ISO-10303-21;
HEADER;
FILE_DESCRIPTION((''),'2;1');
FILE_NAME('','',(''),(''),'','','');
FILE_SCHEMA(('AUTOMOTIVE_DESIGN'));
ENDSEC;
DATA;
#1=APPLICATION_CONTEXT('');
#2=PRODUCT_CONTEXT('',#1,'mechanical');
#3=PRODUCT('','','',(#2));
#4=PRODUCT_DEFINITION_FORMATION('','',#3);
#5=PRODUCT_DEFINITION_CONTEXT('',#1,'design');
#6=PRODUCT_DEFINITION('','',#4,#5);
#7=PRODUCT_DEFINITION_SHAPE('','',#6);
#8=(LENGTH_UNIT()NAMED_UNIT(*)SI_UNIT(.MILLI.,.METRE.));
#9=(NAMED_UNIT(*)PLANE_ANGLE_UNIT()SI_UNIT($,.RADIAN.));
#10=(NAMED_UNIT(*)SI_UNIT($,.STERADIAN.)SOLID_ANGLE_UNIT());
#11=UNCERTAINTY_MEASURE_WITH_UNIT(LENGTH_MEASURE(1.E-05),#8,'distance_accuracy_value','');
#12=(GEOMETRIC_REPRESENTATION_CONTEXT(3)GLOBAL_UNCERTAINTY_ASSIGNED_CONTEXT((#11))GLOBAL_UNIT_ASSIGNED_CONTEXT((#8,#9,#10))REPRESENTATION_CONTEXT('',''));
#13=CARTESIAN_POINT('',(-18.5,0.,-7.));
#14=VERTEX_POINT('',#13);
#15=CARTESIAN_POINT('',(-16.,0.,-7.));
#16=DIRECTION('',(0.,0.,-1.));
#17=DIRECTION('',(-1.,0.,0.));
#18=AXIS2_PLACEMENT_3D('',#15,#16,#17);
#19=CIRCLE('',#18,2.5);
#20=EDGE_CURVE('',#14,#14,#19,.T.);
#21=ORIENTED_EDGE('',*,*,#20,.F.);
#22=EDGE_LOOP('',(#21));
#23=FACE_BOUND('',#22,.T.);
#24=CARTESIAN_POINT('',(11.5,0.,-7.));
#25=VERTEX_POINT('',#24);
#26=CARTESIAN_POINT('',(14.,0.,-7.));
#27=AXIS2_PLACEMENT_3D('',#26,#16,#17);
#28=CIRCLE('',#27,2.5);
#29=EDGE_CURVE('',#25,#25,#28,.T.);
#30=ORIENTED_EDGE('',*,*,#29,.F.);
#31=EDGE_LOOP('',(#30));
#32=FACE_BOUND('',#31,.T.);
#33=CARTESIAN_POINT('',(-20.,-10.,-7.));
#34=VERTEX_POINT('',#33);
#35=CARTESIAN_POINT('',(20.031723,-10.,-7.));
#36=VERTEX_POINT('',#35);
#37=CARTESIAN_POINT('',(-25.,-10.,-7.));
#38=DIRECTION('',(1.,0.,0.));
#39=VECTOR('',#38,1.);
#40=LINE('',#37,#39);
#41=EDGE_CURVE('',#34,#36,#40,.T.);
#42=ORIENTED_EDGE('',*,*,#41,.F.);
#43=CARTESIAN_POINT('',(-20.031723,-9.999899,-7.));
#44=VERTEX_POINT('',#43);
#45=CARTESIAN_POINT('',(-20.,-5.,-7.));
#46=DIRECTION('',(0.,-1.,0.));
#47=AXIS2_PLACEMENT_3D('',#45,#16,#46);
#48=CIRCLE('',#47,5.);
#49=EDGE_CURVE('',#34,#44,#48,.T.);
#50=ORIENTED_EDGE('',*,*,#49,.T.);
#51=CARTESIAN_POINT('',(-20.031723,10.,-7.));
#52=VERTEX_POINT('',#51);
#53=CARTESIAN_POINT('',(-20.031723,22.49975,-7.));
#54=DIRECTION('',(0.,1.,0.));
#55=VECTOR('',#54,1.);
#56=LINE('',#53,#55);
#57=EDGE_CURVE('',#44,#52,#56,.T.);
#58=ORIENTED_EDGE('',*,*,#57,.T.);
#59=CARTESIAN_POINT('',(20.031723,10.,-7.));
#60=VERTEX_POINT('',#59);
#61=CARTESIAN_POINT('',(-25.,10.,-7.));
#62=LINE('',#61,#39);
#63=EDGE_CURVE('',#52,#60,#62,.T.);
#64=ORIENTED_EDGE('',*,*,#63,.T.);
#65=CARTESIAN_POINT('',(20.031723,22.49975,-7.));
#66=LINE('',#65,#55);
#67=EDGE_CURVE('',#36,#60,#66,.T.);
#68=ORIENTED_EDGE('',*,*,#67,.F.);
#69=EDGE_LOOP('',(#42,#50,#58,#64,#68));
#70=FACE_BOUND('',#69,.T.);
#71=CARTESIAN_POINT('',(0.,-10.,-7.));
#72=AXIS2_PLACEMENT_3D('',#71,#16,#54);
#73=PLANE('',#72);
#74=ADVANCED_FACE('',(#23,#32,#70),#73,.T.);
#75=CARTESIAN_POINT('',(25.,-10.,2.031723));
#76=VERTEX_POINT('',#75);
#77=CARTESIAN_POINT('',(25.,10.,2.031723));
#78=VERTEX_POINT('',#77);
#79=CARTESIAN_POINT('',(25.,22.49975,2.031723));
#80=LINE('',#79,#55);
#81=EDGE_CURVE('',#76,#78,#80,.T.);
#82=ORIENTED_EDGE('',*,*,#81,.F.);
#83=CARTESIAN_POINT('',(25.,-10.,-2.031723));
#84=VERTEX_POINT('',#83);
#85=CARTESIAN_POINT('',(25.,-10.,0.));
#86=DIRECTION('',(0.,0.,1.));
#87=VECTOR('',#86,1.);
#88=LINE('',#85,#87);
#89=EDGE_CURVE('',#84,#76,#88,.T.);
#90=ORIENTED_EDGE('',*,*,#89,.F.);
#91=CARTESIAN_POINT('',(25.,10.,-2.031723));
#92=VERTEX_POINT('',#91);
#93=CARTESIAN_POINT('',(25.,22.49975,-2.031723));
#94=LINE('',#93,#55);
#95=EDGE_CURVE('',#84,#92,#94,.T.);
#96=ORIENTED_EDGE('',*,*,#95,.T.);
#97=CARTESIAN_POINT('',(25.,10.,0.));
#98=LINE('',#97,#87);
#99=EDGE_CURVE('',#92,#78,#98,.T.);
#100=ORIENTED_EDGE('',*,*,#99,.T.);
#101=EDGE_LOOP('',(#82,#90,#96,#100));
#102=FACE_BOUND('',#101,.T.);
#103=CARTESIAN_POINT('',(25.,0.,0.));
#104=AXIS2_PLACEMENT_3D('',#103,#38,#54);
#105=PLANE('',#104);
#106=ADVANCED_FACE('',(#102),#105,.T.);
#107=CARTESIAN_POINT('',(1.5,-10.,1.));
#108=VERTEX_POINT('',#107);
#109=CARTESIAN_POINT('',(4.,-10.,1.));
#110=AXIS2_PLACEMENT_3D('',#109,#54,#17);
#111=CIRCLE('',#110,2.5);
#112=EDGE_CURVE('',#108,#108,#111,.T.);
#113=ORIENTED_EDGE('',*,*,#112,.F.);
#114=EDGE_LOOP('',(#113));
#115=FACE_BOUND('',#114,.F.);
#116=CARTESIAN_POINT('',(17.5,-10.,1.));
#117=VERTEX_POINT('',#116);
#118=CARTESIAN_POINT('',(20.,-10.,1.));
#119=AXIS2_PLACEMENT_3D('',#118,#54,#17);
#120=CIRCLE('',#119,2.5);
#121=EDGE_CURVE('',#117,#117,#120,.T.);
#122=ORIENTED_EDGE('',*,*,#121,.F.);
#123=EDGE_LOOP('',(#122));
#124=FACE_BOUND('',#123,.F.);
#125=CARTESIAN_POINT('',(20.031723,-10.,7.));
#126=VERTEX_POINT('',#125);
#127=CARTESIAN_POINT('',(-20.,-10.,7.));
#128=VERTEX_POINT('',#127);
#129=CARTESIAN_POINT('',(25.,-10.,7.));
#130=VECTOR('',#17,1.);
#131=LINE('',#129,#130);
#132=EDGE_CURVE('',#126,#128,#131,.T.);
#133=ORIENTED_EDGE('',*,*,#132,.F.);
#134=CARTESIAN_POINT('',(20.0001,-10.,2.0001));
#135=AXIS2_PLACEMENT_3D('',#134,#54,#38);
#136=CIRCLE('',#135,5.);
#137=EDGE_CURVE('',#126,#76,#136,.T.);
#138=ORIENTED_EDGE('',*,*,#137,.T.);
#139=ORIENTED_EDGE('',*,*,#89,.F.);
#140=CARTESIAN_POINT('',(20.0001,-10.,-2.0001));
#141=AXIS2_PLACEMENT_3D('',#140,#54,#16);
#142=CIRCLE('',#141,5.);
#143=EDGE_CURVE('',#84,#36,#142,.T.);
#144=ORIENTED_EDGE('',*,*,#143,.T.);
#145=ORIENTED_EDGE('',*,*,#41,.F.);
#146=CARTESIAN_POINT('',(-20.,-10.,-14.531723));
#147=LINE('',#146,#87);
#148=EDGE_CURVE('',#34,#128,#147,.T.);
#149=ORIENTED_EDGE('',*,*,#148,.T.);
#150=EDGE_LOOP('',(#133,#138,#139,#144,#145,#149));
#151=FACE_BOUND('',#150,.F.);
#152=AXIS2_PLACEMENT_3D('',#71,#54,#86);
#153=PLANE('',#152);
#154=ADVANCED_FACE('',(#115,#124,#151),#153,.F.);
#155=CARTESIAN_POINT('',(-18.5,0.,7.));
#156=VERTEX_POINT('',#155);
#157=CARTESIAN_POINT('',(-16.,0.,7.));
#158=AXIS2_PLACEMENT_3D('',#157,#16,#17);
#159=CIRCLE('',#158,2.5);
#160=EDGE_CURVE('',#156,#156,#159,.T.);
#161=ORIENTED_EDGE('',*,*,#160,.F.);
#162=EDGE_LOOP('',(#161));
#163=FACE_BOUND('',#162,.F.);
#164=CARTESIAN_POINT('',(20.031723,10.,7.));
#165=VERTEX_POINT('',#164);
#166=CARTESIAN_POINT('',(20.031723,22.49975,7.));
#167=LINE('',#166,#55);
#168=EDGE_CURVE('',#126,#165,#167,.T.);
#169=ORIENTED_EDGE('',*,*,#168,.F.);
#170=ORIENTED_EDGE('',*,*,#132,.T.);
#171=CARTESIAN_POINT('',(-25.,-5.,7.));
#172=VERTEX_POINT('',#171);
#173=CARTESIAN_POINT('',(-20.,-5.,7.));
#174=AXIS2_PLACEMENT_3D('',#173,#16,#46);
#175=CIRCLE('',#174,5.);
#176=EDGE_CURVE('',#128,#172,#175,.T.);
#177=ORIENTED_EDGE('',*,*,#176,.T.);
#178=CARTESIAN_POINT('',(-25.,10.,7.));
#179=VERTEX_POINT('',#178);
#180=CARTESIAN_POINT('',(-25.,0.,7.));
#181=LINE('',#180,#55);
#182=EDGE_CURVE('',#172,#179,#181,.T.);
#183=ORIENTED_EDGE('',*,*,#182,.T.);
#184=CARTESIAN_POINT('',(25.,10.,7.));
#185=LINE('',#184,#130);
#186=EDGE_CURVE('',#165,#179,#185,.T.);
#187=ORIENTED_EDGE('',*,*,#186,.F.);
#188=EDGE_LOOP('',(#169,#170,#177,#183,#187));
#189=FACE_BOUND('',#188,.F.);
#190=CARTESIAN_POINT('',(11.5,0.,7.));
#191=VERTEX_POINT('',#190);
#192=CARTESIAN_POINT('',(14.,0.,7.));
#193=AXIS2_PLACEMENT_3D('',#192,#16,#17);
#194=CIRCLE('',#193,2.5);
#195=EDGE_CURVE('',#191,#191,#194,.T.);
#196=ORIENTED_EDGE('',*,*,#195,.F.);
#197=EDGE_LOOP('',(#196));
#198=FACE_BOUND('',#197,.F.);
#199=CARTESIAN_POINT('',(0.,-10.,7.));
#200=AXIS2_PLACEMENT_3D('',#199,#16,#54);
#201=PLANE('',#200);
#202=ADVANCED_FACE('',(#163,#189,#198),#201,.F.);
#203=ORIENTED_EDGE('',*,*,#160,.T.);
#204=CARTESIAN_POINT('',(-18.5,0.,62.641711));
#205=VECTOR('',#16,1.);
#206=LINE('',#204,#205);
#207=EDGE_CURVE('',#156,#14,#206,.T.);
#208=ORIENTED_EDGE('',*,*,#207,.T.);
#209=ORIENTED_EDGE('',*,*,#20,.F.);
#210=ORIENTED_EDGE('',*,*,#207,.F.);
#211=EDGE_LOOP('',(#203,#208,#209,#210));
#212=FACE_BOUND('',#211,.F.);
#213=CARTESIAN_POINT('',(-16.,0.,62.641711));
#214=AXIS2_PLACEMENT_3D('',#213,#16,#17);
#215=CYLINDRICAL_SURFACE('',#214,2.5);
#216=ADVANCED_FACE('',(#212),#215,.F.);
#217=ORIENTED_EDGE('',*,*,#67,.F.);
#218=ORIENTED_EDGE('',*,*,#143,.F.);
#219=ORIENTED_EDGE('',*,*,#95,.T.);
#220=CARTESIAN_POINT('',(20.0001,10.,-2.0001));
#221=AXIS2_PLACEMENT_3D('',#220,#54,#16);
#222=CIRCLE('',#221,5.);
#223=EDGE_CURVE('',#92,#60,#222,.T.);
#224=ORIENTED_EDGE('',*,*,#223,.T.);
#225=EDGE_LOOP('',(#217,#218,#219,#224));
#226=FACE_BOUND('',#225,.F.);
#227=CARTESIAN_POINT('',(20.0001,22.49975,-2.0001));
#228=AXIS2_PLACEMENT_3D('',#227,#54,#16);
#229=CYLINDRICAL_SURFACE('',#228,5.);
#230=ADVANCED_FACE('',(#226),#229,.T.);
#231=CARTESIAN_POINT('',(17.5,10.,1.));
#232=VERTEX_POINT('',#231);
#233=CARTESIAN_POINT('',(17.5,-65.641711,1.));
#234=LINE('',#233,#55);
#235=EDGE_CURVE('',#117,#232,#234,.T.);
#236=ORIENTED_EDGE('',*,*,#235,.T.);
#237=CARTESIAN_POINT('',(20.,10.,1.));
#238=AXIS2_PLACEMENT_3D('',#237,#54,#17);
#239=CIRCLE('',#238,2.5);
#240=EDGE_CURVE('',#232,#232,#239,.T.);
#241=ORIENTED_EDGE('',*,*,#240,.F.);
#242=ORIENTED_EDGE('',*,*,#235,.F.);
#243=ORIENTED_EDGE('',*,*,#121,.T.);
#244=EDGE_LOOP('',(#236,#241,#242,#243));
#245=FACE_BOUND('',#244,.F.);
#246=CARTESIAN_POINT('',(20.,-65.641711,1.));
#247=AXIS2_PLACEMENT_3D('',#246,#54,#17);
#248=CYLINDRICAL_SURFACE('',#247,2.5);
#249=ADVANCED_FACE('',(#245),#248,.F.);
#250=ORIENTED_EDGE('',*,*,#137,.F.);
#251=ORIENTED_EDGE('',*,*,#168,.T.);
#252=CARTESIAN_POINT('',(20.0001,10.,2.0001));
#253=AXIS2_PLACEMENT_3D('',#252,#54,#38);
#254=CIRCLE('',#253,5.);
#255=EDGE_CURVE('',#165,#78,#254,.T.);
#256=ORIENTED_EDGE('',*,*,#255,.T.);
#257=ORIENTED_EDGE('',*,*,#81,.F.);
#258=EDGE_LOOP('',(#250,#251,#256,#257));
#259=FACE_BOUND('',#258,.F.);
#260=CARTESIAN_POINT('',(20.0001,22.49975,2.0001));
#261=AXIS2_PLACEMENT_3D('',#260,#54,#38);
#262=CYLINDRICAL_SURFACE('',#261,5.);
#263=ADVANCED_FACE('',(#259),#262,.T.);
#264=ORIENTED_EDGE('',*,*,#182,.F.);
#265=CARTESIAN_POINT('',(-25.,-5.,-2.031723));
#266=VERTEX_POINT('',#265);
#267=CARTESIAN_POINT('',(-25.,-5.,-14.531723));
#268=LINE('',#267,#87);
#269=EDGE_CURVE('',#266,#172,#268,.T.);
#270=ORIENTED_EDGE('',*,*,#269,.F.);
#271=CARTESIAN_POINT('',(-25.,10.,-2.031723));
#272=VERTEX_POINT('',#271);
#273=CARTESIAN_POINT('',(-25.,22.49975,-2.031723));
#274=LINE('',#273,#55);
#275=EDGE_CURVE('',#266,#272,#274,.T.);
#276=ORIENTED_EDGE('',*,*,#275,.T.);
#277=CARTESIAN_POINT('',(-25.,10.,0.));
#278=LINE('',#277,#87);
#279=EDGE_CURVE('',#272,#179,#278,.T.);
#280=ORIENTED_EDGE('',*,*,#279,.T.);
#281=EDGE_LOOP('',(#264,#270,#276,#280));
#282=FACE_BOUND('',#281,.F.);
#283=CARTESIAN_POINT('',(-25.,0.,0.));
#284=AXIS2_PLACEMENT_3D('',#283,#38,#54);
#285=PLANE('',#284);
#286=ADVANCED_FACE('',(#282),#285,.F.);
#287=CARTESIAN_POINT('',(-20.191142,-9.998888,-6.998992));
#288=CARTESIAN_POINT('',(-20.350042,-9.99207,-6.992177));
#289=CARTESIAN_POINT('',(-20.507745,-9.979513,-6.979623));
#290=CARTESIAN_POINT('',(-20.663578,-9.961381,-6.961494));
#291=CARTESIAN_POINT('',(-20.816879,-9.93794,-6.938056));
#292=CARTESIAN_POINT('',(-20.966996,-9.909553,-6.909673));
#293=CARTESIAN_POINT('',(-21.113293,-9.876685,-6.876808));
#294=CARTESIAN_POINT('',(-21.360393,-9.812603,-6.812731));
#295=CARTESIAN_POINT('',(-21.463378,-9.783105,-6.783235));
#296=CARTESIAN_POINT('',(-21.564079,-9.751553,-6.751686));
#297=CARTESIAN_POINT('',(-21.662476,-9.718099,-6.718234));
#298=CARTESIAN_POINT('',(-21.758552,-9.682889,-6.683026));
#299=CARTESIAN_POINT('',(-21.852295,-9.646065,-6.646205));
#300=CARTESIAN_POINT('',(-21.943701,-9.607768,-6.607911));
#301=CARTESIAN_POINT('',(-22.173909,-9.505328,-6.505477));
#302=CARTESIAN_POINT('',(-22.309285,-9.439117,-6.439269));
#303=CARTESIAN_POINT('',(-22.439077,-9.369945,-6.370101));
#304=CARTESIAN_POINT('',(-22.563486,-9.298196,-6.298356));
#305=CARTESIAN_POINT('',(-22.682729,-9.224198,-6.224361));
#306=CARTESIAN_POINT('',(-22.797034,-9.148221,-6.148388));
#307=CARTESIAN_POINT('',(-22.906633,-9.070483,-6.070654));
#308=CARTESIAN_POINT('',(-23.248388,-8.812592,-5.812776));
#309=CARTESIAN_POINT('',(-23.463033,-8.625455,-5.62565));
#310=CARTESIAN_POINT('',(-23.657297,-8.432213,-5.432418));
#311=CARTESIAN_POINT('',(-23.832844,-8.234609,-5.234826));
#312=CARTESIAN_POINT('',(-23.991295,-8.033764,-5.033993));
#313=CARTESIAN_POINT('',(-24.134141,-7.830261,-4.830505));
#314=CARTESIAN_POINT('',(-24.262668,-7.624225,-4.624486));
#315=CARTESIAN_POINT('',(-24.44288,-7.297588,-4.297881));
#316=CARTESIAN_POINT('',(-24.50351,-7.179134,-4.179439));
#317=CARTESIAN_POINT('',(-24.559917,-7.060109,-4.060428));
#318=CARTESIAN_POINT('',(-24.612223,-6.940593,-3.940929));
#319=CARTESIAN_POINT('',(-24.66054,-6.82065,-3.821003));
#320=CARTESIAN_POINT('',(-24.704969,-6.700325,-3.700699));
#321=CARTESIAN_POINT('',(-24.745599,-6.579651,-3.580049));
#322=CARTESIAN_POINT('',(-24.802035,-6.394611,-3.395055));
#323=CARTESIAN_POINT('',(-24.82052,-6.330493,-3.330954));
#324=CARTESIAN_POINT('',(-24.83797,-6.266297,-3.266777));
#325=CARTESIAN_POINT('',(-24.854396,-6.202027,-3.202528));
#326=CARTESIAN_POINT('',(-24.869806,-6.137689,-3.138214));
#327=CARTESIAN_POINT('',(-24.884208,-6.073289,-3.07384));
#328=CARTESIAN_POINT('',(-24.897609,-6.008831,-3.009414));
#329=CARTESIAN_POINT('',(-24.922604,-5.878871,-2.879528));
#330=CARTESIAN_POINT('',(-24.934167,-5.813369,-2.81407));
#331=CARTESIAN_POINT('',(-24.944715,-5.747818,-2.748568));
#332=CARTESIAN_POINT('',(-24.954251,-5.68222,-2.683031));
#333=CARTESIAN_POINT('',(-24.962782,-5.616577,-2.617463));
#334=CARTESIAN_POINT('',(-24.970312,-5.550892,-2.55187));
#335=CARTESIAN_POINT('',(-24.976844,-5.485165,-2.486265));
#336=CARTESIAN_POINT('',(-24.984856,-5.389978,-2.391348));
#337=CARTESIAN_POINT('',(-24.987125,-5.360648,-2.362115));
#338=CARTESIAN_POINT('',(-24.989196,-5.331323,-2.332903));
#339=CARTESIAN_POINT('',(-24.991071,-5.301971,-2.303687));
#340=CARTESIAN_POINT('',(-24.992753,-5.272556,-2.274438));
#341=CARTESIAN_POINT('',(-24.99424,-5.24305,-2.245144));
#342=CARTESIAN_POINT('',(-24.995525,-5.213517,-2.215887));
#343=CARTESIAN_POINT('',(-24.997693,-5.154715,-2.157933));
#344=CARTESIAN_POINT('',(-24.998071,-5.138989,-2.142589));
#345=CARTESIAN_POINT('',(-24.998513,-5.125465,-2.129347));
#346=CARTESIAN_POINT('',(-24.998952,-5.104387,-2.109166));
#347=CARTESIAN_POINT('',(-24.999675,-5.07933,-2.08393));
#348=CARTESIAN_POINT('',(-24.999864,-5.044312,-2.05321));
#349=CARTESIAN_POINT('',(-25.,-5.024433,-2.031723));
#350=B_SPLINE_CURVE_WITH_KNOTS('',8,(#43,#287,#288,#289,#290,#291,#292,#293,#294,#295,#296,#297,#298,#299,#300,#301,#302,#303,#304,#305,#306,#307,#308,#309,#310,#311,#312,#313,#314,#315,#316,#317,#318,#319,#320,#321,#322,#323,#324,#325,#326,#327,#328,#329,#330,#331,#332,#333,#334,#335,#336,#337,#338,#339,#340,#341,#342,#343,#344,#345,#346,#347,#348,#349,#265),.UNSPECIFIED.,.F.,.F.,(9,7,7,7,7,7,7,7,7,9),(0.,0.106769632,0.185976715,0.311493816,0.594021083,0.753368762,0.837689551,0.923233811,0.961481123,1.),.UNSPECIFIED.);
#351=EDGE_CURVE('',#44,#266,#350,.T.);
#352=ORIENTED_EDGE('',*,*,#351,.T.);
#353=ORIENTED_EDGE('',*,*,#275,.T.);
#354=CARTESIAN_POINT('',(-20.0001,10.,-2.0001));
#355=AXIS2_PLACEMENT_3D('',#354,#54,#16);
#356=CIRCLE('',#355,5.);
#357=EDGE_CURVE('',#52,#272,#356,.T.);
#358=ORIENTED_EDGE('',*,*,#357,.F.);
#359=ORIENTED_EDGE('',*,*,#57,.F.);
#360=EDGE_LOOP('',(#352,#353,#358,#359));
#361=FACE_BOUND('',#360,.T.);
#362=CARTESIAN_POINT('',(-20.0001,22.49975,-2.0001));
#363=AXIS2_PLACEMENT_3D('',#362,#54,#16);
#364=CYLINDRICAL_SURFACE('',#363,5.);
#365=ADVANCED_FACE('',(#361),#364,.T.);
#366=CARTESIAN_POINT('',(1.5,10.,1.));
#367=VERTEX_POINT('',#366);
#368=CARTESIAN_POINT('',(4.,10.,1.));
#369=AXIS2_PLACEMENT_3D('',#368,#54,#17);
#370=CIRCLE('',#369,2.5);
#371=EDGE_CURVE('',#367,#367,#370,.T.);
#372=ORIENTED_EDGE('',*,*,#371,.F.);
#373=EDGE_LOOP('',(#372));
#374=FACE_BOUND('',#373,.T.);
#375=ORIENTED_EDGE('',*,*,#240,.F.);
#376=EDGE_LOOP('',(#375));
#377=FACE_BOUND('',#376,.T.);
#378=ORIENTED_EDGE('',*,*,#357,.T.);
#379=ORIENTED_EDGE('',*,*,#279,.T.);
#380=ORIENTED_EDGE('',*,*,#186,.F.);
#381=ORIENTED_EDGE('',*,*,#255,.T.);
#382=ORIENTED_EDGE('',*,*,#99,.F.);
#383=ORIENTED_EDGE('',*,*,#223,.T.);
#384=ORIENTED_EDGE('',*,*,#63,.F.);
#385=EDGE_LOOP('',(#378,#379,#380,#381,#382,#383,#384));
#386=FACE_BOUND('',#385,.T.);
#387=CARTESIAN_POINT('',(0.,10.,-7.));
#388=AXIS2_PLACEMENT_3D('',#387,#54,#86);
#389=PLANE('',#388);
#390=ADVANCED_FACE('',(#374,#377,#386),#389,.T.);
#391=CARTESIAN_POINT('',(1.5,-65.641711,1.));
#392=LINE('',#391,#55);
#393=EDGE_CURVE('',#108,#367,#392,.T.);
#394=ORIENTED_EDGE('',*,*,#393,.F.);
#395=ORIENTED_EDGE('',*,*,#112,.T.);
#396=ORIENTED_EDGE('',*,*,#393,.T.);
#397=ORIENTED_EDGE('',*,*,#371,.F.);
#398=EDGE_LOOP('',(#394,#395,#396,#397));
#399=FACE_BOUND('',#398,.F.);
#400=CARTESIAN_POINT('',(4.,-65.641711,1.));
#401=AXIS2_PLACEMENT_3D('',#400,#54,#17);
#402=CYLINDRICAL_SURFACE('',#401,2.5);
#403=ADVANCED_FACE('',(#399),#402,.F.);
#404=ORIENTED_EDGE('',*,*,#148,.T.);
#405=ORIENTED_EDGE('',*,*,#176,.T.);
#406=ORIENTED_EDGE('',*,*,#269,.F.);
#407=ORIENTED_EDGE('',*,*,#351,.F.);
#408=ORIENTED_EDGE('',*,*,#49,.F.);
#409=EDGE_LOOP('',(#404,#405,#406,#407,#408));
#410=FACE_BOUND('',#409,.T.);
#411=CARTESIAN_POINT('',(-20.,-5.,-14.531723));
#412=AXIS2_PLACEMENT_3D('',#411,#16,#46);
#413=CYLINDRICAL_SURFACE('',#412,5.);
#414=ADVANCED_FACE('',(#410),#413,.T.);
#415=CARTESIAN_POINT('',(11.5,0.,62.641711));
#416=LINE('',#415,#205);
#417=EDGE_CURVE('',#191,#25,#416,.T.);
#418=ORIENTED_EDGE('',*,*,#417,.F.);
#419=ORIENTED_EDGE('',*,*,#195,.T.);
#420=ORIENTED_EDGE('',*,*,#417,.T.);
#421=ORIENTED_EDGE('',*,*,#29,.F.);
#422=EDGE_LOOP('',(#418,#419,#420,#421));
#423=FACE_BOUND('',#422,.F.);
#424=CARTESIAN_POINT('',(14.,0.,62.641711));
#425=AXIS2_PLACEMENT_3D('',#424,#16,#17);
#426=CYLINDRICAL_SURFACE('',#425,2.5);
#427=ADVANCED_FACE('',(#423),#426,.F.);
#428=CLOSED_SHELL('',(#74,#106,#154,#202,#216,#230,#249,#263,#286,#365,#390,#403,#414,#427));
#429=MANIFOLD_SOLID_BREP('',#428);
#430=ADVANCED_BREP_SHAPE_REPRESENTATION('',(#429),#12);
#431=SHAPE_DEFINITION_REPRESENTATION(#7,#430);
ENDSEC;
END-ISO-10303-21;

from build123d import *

# Parameters (mm, degrees)
F0_W        = 20
F0_H        = 14
F1_DEPTH    = 25
F3_D        = 5
F5_D        = 5
F6_T1_DEPTH = 44.999500005
F7_T1_DEPTH = 34.0317226184


# Not quite as in the source:
# - a fillet or chamfer that OpenCascade refuses, or shapes differently, is made with other operations: its cross-section is extruded or revolved along the edge and cut away or added


with BuildPart() as f1:
    # F0 (on Right) → F1 (new body, symmetric)
    with BuildSketch(Plane.YZ):
        Rectangle(F0_W, F0_H)
    extrude(amount=F1_DEPTH, both=True)

    # F3 (through all)
    with Locations(Plane.XZ.offset(10)):
        with Locations((4, 1), (20, 1)):
            Hole(F3_D / 2)

    # F5 (through all)
    with Locations(Plane.XY.offset(7)):
        with Locations((-16, 0), (14, 0)):
            Hole(F5_D / 2)

    # F6: fillet of radius 5 on 3 edges, made by hand

    # F6_s2 → F6_t1 (cut)
    with BuildSketch(Plane.XZ.offset(-22.4997500025)):
        with BuildLine():
            ThreePointArc((25.0001, 2.0001), (23.5356339059, 5.5356339059), (20.0001, 7.0001))
            Line((20.0001, 7.0001), (20.0001, 7.1001))
            ThreePointArc((20.0001, 7.1001), (22.50005, 7.1), (25, 7.1))
            Line((25, 7.1), (25.1, 7))
            ThreePointArc((25.1, 7), (25.1, 4.50005), (25.1001, 2.0001))
            Line((25.1001, 2.0001), (25.0001, 2.0001))
        make_face()
        with BuildLine():
            ThreePointArc((-20.0001, -7.0001), (-23.5356339059, -5.5356339059), (-25.0001, -2.0001))
            Line((-25.0001, -2.0001), (-25.1001, -2.0001))
            ThreePointArc((-25.1001, -2.0001), (-25.1, -4.50005), (-25.1, -7))
            Line((-25.1, -7), (-25, -7.1))
            ThreePointArc((-25, -7.1), (-22.50005, -7.1), (-20.0001, -7.1001))
            Line((-20.0001, -7.1001), (-20.0001, -7.0001))
        make_face()
        with BuildLine():
            ThreePointArc((20.0001, -7.0001), (23.5356339059, -5.5356339059), (25.0001, -2.0001))
            Line((25.0001, -2.0001), (25.1001, -2.0001))
            ThreePointArc((25.1001, -2.0001), (25.1, -4.50005), (25.1, -7))
            Line((25.1, -7), (25, -7.1))
            ThreePointArc((25, -7.1), (22.50005, -7.1), (20.0001, -7.1001))
            Line((20.0001, -7.1001), (20.0001, -7.0001))
        make_face()
    extrude(amount=F6_T1_DEPTH, mode=Mode.SUBTRACT)

    # F7: fillet of radius 5 on 1 edges, made by hand

    # F7_s2 → F7_t1 (cut)
    with BuildSketch(Plane.XY.offset(-14.5317226184)):
        with BuildLine():
            ThreePointArc((-20, -10), (-23.5355339059, -8.5355339059), (-25, -5))
            Line((-25, -5), (-25, -10))
            Line((-25, -10), (-20, -10))
        make_face()
    extrude(amount=F7_T1_DEPTH, mode=Mode.SUBTRACT)


solid = f1.part
